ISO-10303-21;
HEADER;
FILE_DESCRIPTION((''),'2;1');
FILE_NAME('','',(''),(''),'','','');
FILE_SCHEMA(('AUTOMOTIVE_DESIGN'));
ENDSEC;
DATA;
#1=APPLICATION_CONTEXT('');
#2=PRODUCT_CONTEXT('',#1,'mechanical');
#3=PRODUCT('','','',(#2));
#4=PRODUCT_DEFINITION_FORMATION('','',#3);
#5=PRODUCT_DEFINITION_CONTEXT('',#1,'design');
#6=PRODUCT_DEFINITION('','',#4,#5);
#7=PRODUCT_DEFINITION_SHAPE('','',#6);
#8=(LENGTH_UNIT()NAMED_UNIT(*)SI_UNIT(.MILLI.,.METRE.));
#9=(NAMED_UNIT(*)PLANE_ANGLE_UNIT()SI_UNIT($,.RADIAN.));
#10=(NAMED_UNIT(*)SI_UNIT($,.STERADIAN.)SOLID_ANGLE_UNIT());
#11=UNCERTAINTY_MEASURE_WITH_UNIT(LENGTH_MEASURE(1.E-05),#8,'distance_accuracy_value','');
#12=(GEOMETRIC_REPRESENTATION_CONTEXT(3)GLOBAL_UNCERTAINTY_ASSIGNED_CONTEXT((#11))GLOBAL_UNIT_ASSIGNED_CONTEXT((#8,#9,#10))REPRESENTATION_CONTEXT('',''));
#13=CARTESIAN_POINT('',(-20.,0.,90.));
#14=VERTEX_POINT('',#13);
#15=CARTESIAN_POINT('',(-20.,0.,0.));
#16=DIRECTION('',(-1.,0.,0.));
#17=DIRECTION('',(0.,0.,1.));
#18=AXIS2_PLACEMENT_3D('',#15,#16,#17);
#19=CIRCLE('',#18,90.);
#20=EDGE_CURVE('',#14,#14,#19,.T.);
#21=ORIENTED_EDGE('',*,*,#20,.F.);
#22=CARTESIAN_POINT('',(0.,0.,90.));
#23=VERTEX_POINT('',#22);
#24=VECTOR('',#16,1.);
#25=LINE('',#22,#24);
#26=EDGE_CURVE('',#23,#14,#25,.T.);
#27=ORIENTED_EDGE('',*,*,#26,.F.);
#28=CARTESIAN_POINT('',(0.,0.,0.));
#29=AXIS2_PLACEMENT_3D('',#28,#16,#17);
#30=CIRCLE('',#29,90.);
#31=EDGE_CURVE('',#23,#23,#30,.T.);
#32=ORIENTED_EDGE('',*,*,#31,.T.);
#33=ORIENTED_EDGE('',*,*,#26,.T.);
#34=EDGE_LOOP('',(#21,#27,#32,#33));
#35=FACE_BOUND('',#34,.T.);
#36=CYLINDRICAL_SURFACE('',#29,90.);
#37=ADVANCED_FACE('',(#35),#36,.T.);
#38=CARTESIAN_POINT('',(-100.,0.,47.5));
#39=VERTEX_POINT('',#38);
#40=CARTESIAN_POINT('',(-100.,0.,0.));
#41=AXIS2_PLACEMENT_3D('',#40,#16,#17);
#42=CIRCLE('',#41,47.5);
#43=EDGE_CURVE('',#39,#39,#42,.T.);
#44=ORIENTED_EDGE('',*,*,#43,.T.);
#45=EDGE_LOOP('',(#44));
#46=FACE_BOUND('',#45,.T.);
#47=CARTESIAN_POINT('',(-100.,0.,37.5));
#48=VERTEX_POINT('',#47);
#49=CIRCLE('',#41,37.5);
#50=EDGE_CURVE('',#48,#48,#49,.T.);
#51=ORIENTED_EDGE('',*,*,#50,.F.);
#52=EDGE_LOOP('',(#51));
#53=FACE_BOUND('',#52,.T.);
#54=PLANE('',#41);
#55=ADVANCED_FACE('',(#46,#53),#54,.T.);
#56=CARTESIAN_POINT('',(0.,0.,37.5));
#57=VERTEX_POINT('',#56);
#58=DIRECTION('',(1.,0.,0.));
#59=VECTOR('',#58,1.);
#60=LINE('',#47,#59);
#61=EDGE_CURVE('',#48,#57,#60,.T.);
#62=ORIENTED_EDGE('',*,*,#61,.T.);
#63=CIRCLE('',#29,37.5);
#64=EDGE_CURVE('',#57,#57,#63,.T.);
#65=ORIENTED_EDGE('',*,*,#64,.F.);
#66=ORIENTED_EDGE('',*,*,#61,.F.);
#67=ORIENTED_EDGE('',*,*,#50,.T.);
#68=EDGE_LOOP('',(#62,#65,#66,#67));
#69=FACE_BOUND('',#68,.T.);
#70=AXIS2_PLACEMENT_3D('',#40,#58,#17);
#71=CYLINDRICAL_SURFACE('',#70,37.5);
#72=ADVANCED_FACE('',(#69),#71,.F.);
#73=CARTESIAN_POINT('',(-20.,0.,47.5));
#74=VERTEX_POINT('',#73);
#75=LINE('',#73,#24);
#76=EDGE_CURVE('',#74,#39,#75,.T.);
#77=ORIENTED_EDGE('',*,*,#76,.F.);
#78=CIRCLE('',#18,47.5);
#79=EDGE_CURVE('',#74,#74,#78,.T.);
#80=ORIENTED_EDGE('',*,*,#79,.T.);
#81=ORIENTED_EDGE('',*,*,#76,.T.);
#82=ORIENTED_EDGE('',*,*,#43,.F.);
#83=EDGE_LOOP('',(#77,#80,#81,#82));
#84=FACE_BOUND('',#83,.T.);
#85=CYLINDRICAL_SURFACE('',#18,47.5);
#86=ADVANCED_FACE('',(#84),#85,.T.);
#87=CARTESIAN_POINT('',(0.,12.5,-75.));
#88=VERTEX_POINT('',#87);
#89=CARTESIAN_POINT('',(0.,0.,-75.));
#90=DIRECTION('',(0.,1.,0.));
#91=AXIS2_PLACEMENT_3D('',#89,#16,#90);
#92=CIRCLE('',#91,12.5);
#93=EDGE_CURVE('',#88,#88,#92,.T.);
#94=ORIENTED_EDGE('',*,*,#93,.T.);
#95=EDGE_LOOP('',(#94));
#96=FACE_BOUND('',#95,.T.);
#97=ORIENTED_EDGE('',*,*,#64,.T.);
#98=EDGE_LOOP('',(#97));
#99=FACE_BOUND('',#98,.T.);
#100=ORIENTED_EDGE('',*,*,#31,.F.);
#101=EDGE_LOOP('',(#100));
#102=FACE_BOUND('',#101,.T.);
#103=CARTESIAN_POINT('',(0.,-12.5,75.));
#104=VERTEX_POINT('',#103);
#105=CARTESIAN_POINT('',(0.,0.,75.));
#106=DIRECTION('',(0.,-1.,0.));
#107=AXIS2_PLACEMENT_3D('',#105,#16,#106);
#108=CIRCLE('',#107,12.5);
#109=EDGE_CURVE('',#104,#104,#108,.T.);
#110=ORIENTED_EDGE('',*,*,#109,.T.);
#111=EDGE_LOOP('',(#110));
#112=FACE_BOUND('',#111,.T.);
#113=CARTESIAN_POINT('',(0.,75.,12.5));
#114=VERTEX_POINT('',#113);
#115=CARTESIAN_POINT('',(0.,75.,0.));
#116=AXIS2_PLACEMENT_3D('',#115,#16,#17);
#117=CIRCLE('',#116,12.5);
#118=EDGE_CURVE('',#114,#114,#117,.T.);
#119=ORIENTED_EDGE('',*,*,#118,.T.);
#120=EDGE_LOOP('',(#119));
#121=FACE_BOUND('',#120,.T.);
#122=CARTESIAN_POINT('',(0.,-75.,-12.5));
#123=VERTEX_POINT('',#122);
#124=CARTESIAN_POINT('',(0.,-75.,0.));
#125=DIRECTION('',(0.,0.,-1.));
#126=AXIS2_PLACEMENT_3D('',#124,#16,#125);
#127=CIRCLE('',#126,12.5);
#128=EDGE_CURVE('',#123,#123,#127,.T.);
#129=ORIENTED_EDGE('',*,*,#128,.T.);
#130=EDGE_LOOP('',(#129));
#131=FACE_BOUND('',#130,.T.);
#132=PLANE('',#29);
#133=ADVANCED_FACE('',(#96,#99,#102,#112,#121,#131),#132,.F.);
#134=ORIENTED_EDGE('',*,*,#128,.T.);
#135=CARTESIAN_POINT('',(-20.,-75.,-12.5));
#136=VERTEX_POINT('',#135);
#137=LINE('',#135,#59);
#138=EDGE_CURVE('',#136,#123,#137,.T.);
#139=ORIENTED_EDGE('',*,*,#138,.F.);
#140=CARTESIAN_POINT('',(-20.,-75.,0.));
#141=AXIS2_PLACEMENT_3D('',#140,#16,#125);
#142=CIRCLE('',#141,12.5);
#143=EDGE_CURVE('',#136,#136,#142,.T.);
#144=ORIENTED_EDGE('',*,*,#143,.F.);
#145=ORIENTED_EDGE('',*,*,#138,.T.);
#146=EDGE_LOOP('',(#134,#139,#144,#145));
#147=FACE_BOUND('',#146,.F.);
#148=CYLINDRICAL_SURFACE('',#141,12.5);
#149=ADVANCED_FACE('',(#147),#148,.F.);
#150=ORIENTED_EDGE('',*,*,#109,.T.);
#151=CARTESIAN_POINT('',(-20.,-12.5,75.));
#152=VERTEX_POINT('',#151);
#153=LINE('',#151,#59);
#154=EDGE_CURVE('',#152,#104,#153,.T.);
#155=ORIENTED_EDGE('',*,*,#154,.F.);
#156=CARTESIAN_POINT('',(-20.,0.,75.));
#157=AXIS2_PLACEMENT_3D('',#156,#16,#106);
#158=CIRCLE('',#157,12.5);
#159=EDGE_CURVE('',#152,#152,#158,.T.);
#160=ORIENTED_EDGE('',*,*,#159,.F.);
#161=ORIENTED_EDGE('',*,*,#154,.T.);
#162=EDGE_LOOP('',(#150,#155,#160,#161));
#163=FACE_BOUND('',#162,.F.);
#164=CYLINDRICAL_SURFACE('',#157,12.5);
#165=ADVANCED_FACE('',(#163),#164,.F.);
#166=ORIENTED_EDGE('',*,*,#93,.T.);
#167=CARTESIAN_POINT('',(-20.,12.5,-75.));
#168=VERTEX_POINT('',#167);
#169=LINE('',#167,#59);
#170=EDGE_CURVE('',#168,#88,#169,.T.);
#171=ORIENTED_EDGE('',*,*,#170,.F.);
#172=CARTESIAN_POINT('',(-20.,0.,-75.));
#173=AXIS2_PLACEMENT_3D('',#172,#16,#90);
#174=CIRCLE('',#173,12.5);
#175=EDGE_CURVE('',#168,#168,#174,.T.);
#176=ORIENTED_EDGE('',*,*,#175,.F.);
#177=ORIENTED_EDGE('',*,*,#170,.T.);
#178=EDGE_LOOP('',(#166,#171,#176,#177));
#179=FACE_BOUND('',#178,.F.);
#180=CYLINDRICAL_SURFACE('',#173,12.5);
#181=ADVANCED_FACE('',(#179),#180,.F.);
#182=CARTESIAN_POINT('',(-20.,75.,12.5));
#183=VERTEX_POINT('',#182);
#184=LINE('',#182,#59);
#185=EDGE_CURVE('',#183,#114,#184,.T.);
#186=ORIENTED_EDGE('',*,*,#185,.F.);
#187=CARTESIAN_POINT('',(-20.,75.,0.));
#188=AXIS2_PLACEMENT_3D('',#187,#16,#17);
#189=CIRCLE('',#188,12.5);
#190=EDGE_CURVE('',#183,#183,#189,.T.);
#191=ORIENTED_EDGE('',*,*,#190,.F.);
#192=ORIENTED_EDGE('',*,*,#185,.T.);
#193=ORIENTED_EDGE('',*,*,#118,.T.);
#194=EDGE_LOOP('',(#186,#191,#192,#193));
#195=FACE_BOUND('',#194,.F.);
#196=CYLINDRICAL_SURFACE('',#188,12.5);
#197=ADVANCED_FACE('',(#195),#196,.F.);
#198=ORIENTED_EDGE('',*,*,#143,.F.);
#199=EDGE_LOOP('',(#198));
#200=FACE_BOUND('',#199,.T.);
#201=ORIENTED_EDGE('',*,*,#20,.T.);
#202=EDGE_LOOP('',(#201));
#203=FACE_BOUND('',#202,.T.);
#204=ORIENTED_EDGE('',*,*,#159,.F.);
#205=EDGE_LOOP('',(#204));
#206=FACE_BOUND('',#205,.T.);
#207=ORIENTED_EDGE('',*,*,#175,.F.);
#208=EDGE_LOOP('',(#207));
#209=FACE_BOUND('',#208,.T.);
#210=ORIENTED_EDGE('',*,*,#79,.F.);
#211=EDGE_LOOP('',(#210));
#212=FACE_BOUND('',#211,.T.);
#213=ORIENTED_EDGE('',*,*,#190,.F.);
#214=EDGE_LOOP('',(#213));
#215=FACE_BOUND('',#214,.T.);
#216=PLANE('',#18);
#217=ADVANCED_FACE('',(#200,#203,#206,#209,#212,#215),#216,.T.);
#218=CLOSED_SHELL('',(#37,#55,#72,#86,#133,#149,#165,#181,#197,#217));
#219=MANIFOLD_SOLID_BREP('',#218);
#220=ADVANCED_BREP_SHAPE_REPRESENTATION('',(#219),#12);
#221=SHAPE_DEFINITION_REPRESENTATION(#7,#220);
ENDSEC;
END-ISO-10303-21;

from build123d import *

# Parameters (mm, degrees)
F2_R            = 12.5
F3_DEPTH        = 20.001
F3_COPIES_COUNT = 4


# Not quite as in the source:
# - a pattern or mirror of a feature is missing from the dataset's text; its kind, count and spacing are read off the source's solid


with BuildPart() as f1:
    # F0 (on Front) → F1 (revolve)
    with BuildSketch(Plane.XZ):
        Polygon((-100, 37.5), (0, 37.5), (0, 90), (-20, 90), (-20, 47.5), (-100, 47.5), align=None)
    revolve(axis=Axis((-90.7405540347, 0, 0), (-1, 0, 0)))

    # F2 (on face) → F3 (cut, through all)
    with BuildSketch(Plane(origin=(-20, 0, 0), x_dir=(0, -1, 0), z_dir=(-1, 0, 0))):
        with Locations((0, 75)):
            Circle(F2_R)
    f3 = extrude(amount=-F3_DEPTH, mode=Mode.SUBTRACT)

    # F3_copies: F3 ×4 about axis
    f3_copies_axis = Axis((0, 0, 0), (1, 0, 0))
    for i in range(1, F3_COPIES_COUNT):
        add(f3.rotate(f3_copies_axis, i * 360 / F3_COPIES_COUNT), mode=Mode.SUBTRACT)


solid = f1.part
